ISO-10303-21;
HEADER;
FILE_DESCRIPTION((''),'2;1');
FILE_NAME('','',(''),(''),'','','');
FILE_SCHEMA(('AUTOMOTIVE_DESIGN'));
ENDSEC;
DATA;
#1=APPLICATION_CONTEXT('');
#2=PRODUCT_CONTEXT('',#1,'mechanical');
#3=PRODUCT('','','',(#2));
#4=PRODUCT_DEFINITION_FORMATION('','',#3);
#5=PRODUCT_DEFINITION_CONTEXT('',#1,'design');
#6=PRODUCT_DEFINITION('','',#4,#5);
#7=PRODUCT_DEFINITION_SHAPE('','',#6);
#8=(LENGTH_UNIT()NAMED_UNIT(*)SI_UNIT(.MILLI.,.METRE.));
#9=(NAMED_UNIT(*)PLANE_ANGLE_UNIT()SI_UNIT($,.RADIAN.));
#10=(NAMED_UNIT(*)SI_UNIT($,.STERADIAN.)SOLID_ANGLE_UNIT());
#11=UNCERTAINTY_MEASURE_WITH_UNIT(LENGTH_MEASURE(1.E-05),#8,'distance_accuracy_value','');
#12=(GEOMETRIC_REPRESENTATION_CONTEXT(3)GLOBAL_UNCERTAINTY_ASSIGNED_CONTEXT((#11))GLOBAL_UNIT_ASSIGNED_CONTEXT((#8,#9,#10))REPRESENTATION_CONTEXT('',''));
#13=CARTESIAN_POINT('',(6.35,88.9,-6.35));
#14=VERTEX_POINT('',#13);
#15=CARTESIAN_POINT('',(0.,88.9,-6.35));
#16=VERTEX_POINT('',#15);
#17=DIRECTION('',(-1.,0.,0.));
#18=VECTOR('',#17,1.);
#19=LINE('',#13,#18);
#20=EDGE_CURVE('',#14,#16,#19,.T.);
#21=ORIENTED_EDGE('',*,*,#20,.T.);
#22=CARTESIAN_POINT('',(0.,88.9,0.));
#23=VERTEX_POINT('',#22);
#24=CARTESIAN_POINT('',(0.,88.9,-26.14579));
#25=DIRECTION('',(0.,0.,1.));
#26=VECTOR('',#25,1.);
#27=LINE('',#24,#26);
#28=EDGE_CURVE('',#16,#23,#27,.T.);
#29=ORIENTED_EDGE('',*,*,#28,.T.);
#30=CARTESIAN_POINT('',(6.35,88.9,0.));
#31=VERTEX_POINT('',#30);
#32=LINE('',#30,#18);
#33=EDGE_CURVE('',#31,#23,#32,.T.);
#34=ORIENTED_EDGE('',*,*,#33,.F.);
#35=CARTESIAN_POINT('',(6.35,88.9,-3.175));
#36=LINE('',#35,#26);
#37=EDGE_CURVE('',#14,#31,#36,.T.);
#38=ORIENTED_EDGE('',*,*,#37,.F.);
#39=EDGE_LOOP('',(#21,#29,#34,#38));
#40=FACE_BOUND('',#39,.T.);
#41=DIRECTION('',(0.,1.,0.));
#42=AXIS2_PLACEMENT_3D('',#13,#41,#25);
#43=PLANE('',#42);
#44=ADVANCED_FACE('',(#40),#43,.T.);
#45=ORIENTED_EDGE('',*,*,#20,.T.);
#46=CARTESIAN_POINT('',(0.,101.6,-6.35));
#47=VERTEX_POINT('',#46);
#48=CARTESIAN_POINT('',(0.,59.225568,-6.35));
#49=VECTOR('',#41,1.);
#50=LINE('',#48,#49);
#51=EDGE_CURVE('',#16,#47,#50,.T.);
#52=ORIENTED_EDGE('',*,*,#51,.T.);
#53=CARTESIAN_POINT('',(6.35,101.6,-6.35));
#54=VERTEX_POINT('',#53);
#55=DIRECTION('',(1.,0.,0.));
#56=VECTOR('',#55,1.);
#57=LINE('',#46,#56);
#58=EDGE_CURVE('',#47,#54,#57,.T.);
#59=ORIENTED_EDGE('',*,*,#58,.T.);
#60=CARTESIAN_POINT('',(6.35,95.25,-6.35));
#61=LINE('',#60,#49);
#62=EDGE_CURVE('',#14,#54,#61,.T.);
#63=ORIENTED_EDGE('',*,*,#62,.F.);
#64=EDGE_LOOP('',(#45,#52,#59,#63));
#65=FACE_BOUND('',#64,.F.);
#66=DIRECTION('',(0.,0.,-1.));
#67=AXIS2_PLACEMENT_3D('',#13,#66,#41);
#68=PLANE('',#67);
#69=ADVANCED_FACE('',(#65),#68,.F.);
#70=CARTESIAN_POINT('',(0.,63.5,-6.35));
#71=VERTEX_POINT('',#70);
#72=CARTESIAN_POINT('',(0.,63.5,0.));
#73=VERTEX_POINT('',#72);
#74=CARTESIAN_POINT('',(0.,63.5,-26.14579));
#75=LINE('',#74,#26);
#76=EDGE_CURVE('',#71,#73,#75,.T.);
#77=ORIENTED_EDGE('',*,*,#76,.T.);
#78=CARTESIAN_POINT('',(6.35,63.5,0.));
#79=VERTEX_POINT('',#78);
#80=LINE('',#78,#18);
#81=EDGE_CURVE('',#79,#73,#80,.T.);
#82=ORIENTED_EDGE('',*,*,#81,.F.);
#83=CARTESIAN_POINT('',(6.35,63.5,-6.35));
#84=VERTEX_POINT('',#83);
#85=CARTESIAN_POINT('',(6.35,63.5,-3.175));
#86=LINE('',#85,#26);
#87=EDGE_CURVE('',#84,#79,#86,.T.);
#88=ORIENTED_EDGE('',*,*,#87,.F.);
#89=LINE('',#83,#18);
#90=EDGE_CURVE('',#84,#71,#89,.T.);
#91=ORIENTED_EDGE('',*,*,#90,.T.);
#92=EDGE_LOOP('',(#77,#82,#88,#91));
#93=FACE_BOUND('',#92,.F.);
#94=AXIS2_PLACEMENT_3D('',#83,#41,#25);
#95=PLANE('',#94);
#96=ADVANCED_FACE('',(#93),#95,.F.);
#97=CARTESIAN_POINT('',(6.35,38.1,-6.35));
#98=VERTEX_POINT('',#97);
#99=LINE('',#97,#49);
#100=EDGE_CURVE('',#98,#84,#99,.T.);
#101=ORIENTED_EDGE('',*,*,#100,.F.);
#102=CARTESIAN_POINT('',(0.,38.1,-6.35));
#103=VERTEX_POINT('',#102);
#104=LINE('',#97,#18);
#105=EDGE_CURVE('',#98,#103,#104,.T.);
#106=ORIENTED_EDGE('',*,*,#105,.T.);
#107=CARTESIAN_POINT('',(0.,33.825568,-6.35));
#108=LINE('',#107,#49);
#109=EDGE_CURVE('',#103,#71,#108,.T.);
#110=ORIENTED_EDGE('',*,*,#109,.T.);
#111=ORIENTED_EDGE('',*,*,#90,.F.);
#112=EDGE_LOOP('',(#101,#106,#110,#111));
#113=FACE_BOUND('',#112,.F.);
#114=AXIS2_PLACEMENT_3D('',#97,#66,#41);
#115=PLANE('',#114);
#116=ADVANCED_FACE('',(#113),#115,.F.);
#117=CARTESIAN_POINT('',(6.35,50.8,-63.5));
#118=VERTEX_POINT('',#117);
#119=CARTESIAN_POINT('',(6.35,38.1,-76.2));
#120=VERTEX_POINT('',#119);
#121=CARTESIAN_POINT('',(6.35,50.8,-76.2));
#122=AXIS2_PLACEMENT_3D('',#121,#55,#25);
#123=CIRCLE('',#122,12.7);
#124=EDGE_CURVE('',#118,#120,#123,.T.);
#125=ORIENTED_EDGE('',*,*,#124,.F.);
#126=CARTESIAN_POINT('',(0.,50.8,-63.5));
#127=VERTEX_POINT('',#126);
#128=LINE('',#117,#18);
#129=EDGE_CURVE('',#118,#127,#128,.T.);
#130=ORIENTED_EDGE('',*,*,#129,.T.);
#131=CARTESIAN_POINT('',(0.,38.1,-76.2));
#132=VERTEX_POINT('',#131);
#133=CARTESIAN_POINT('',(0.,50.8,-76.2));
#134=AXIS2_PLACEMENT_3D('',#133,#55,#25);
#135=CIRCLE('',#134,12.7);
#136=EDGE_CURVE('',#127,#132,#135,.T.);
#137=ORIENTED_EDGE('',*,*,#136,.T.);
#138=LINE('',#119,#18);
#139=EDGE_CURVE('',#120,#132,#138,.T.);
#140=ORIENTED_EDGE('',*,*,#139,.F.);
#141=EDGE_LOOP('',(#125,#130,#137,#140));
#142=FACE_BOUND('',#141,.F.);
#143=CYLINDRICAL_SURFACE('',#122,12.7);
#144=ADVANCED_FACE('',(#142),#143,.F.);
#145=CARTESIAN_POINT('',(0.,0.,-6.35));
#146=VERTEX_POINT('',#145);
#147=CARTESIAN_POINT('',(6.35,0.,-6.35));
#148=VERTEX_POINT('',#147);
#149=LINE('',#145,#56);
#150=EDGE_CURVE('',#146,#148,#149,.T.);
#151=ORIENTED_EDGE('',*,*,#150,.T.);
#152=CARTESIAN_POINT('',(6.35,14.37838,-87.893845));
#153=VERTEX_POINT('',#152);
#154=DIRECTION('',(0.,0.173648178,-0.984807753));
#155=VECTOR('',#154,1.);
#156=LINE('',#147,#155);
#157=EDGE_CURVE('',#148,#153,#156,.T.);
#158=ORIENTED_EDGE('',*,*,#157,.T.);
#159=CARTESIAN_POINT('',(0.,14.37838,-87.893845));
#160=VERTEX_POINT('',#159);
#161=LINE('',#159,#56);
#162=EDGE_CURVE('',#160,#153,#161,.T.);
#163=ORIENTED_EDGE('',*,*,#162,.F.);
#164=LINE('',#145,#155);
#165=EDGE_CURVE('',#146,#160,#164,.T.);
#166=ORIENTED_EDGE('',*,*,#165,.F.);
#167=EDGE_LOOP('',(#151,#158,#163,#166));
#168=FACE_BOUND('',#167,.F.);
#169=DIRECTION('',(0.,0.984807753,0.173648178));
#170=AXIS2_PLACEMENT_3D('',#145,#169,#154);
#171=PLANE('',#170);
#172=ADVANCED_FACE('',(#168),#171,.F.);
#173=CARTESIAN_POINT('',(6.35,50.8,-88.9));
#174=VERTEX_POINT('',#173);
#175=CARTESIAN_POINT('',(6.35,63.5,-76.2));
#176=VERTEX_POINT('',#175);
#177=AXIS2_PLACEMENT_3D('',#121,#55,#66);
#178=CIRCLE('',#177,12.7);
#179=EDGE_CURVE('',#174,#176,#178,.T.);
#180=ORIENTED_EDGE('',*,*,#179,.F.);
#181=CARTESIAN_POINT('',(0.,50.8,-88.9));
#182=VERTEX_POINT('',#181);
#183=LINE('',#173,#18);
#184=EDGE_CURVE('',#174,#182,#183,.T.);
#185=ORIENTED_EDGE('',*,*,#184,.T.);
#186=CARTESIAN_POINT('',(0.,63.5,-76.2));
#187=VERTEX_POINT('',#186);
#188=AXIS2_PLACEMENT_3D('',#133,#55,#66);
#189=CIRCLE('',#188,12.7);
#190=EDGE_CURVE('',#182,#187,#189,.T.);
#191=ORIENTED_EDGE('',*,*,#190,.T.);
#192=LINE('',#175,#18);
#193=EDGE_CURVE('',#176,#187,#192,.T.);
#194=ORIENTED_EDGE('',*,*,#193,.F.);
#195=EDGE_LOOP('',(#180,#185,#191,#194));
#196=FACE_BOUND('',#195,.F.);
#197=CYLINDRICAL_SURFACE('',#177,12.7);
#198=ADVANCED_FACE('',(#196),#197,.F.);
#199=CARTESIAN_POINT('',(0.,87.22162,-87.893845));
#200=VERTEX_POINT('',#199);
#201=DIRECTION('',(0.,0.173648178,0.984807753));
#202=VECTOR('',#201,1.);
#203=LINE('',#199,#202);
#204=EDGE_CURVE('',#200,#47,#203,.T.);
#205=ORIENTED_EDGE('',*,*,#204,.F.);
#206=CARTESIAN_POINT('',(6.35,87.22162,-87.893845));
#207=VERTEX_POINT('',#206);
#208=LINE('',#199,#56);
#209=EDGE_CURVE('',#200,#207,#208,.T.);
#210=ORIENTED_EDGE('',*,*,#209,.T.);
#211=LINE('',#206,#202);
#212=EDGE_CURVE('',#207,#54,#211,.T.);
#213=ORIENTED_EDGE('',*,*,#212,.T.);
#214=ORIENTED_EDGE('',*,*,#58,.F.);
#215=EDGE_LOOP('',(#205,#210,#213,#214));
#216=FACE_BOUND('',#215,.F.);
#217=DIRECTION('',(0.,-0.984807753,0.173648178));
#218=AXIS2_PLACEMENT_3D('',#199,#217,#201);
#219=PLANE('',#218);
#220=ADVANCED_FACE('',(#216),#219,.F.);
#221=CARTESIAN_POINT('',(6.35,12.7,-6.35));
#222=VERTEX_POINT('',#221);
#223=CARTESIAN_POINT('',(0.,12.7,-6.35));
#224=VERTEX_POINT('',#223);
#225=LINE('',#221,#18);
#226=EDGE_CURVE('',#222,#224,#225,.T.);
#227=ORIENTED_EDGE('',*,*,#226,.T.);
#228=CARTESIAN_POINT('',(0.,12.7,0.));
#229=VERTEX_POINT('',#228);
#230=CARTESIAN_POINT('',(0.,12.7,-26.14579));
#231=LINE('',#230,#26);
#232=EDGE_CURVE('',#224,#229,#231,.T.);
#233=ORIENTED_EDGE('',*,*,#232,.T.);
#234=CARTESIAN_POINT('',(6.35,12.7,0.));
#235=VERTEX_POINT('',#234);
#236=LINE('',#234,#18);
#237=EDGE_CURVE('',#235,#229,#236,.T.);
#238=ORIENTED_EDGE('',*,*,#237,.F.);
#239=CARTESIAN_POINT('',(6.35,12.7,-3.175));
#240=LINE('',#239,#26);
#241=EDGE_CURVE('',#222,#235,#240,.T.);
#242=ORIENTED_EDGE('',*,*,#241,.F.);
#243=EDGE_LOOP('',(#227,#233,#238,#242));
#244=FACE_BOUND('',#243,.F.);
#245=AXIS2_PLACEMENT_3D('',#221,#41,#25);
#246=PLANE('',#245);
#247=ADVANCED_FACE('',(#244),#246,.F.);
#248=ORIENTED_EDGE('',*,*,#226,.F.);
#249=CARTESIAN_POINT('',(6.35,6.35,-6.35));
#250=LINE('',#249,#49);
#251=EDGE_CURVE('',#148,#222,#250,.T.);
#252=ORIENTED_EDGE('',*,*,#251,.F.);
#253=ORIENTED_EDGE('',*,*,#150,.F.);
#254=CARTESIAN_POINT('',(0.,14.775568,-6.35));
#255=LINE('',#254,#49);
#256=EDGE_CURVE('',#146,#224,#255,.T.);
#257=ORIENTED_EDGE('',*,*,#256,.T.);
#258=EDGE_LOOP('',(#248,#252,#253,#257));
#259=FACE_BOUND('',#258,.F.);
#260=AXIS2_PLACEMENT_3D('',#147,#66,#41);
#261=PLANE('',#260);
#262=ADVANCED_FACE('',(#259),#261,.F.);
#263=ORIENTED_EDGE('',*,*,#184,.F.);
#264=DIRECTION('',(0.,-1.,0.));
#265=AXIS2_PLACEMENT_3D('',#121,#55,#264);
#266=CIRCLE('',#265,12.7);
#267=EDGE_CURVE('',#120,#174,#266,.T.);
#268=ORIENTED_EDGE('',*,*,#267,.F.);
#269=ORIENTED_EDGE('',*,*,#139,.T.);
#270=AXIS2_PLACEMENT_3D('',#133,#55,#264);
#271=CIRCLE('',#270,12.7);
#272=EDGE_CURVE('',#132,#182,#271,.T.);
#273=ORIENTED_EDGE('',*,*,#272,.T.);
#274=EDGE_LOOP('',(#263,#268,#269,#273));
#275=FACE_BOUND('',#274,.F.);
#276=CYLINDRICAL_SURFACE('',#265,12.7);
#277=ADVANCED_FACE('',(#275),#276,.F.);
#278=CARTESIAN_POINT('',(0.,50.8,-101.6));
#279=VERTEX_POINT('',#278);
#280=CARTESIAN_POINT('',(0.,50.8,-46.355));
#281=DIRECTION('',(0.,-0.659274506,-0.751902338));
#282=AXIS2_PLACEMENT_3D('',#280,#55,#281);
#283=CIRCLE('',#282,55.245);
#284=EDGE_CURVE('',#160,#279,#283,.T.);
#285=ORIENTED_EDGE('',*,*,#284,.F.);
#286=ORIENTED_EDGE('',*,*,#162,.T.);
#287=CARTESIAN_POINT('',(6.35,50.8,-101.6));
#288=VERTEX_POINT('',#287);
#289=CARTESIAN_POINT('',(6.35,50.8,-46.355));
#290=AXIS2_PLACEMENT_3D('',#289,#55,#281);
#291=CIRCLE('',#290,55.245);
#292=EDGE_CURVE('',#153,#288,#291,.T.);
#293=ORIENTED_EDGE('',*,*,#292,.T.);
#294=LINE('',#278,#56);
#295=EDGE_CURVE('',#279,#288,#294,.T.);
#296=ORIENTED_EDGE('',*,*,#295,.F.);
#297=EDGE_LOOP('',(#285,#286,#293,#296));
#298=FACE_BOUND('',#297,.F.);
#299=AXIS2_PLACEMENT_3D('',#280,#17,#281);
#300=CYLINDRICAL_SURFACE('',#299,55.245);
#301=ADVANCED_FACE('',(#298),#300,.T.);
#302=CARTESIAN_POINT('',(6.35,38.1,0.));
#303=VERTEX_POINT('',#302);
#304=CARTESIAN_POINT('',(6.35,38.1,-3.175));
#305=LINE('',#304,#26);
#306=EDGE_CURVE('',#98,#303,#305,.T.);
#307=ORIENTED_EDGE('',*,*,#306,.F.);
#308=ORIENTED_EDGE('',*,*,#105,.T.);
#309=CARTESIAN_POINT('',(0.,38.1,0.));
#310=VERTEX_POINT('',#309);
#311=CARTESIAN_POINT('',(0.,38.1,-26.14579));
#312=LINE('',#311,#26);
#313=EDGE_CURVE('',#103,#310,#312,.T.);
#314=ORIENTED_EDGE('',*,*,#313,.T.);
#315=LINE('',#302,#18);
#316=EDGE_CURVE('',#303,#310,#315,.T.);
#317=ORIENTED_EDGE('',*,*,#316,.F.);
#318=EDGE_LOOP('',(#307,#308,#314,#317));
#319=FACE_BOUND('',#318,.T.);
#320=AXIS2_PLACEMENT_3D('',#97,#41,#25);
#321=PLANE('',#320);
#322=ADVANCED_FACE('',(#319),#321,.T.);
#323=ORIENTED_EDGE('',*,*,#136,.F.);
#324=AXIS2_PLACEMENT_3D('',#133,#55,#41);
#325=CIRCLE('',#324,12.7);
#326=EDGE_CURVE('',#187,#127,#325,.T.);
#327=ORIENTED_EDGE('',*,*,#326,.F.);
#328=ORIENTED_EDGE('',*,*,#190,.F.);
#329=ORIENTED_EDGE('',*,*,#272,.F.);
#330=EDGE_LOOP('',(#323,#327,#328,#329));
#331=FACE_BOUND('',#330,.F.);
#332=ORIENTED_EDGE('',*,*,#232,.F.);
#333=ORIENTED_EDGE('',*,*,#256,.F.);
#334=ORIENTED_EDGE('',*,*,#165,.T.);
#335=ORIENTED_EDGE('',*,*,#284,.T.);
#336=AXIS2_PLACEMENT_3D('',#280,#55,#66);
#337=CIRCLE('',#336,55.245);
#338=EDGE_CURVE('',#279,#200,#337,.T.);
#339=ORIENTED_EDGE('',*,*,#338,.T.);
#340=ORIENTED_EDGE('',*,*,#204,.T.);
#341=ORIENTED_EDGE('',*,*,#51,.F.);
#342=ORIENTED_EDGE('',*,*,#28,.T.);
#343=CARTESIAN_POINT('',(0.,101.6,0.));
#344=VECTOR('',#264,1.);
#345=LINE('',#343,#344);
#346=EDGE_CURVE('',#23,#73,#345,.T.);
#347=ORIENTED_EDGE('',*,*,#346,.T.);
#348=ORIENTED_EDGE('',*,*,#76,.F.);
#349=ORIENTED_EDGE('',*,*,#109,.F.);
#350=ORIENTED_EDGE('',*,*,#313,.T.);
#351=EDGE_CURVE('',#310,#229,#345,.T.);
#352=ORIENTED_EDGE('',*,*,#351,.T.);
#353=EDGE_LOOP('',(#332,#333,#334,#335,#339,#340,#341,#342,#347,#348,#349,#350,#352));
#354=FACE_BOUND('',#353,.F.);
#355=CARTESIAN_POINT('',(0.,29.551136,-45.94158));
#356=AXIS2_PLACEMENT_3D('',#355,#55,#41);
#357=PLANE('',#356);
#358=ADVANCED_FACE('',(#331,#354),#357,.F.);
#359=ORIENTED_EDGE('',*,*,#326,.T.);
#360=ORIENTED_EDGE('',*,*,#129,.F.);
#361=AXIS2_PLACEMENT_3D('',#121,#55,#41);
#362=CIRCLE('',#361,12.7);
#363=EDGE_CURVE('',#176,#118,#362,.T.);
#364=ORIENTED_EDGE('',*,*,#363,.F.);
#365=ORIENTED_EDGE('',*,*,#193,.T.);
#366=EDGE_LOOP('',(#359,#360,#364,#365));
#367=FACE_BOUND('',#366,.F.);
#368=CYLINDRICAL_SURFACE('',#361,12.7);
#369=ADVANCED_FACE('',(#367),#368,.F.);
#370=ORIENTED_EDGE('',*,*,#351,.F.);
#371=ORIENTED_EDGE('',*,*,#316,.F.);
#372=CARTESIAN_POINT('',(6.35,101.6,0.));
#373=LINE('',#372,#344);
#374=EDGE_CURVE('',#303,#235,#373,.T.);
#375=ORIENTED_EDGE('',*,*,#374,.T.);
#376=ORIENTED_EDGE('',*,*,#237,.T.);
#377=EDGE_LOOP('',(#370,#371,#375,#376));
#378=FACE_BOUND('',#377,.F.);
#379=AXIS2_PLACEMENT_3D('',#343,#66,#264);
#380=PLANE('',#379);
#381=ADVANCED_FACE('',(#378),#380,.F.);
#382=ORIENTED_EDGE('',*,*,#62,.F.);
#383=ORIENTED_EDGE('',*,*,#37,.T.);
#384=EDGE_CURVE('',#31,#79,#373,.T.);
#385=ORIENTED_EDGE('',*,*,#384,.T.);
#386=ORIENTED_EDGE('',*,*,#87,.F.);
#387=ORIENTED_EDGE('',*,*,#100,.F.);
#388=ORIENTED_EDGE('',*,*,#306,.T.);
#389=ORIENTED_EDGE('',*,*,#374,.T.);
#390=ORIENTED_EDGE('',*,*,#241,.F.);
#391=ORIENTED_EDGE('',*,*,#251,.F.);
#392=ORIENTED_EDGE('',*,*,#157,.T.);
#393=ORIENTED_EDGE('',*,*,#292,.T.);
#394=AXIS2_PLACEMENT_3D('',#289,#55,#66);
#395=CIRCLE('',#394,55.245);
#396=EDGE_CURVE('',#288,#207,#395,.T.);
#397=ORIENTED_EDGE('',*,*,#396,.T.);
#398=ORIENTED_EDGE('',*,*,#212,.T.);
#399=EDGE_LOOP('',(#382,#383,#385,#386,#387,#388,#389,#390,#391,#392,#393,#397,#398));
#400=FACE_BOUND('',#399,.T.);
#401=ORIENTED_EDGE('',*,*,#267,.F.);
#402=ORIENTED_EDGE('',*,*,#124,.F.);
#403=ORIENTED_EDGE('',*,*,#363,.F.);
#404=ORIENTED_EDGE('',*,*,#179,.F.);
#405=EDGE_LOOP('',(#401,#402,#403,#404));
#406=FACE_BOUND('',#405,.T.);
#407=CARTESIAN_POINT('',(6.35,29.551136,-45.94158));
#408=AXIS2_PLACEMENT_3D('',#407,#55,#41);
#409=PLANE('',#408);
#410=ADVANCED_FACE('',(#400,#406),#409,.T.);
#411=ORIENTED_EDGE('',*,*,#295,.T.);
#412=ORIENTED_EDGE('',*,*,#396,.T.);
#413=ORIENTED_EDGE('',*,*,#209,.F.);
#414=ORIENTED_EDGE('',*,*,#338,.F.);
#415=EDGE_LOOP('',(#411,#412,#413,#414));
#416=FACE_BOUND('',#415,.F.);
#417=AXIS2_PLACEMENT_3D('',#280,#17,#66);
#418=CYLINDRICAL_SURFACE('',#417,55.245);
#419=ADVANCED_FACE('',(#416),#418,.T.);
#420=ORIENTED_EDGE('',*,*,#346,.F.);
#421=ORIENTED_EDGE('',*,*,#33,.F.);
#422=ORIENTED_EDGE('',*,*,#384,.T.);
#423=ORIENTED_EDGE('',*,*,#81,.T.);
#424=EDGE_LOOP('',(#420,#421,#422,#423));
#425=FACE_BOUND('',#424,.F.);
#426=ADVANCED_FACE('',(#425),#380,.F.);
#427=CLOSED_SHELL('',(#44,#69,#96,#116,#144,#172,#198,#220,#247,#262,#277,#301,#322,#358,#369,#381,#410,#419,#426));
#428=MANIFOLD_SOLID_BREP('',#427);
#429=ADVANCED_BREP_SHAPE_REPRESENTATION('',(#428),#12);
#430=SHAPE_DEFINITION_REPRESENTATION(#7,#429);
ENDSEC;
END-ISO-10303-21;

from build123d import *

# Parameters (mm, degrees)
F1_DEPTH = 6.35
F2_W     = 12.7
F2_H     = 6.35
F3_DEPTH = 25.4
F5_DEPTH = 6.351


# Not quite as in the source:
# - a feature names something its author has since deleted; it is built from what else it names


with BuildPart() as f1:
    # F0 (on Right) → F1 (new body)
    with BuildSketch(Plane.YZ):
        with BuildLine():
            Line((50.8, 0), (0, 0))
            Line((0, 0), (0, -6.35))
            Line((0, -6.35), (14.3783799252, -87.8938446653))
            ThreePointArc((14.3783799252, -87.8938446653), (31.3423979963, -98.0600456848), (50.8, -101.6))
            Line((50.8, -101.6), (50.8, 0))
        make_face()
        with BuildLine():
            Line((101.6, 0), (50.8, 0))
            Line((50.8, 0), (50.8, -101.6))
            ThreePointArc((50.8, -101.6), (70.2576020037, -98.0600456848), (87.2216200748, -87.8938446653))
            Line((87.2216200748, -87.8938446653), (101.6, -6.35))
            Line((101.6, -6.35), (101.6, 0))
        make_face()
    extrude(amount=F1_DEPTH)

    # F2 (on face) → F3 (cut)
    with BuildSketch(Plane.YZ.offset(6.35)):
        with Locations((95.25, -3.175)):
            Rectangle(F2_W, F2_H)
        with Locations((44.45, -3.175)):
            Rectangle(F2_W, F2_H)
        with Locations((6.35, -3.175)):
            Rectangle(F2_W, F2_H)
        with Locations((57.15, -3.175)):
            Rectangle(F2_W, F2_H)
    extrude(amount=-F3_DEPTH, mode=Mode.SUBTRACT)

    # F4 (on face) → F5 (cut, through all)
    with BuildSketch(Plane.YZ.offset(6.35)):
        with BuildLine():
            Line((50.8, -88.9), (50.8, -76.2))
            Line((50.8, -76.2), (38.1, -76.2))
            ThreePointArc((38.1, -76.2), (41.8197438789, -85.1802561211), (50.8, -88.9))
        make_face()
        with BuildLine():
            Line((50.8, -76.2), (63.5, -76.2))
            ThreePointArc((63.5, -76.2), (59.7802561211, -67.2197438789), (50.8, -63.5))
            Line((50.8, -63.5), (50.8, -76.2))
        make_face()
        with BuildLine():
            ThreePointArc((50.8, -88.9), (59.7802561211, -85.1802561211), (63.5, -76.2))
            Line((63.5, -76.2), (50.8, -76.2))
            Line((50.8, -76.2), (50.8, -88.9))
        make_face()
        with BuildLine():
            Line((38.1, -76.2), (50.8, -76.2))
            Line((50.8, -76.2), (50.8, -63.5))
            ThreePointArc((50.8, -63.5), (41.8197438789, -67.2197438789), (38.1, -76.2))
        make_face()
    extrude(amount=-F5_DEPTH, mode=Mode.SUBTRACT)


solid = f1.part
